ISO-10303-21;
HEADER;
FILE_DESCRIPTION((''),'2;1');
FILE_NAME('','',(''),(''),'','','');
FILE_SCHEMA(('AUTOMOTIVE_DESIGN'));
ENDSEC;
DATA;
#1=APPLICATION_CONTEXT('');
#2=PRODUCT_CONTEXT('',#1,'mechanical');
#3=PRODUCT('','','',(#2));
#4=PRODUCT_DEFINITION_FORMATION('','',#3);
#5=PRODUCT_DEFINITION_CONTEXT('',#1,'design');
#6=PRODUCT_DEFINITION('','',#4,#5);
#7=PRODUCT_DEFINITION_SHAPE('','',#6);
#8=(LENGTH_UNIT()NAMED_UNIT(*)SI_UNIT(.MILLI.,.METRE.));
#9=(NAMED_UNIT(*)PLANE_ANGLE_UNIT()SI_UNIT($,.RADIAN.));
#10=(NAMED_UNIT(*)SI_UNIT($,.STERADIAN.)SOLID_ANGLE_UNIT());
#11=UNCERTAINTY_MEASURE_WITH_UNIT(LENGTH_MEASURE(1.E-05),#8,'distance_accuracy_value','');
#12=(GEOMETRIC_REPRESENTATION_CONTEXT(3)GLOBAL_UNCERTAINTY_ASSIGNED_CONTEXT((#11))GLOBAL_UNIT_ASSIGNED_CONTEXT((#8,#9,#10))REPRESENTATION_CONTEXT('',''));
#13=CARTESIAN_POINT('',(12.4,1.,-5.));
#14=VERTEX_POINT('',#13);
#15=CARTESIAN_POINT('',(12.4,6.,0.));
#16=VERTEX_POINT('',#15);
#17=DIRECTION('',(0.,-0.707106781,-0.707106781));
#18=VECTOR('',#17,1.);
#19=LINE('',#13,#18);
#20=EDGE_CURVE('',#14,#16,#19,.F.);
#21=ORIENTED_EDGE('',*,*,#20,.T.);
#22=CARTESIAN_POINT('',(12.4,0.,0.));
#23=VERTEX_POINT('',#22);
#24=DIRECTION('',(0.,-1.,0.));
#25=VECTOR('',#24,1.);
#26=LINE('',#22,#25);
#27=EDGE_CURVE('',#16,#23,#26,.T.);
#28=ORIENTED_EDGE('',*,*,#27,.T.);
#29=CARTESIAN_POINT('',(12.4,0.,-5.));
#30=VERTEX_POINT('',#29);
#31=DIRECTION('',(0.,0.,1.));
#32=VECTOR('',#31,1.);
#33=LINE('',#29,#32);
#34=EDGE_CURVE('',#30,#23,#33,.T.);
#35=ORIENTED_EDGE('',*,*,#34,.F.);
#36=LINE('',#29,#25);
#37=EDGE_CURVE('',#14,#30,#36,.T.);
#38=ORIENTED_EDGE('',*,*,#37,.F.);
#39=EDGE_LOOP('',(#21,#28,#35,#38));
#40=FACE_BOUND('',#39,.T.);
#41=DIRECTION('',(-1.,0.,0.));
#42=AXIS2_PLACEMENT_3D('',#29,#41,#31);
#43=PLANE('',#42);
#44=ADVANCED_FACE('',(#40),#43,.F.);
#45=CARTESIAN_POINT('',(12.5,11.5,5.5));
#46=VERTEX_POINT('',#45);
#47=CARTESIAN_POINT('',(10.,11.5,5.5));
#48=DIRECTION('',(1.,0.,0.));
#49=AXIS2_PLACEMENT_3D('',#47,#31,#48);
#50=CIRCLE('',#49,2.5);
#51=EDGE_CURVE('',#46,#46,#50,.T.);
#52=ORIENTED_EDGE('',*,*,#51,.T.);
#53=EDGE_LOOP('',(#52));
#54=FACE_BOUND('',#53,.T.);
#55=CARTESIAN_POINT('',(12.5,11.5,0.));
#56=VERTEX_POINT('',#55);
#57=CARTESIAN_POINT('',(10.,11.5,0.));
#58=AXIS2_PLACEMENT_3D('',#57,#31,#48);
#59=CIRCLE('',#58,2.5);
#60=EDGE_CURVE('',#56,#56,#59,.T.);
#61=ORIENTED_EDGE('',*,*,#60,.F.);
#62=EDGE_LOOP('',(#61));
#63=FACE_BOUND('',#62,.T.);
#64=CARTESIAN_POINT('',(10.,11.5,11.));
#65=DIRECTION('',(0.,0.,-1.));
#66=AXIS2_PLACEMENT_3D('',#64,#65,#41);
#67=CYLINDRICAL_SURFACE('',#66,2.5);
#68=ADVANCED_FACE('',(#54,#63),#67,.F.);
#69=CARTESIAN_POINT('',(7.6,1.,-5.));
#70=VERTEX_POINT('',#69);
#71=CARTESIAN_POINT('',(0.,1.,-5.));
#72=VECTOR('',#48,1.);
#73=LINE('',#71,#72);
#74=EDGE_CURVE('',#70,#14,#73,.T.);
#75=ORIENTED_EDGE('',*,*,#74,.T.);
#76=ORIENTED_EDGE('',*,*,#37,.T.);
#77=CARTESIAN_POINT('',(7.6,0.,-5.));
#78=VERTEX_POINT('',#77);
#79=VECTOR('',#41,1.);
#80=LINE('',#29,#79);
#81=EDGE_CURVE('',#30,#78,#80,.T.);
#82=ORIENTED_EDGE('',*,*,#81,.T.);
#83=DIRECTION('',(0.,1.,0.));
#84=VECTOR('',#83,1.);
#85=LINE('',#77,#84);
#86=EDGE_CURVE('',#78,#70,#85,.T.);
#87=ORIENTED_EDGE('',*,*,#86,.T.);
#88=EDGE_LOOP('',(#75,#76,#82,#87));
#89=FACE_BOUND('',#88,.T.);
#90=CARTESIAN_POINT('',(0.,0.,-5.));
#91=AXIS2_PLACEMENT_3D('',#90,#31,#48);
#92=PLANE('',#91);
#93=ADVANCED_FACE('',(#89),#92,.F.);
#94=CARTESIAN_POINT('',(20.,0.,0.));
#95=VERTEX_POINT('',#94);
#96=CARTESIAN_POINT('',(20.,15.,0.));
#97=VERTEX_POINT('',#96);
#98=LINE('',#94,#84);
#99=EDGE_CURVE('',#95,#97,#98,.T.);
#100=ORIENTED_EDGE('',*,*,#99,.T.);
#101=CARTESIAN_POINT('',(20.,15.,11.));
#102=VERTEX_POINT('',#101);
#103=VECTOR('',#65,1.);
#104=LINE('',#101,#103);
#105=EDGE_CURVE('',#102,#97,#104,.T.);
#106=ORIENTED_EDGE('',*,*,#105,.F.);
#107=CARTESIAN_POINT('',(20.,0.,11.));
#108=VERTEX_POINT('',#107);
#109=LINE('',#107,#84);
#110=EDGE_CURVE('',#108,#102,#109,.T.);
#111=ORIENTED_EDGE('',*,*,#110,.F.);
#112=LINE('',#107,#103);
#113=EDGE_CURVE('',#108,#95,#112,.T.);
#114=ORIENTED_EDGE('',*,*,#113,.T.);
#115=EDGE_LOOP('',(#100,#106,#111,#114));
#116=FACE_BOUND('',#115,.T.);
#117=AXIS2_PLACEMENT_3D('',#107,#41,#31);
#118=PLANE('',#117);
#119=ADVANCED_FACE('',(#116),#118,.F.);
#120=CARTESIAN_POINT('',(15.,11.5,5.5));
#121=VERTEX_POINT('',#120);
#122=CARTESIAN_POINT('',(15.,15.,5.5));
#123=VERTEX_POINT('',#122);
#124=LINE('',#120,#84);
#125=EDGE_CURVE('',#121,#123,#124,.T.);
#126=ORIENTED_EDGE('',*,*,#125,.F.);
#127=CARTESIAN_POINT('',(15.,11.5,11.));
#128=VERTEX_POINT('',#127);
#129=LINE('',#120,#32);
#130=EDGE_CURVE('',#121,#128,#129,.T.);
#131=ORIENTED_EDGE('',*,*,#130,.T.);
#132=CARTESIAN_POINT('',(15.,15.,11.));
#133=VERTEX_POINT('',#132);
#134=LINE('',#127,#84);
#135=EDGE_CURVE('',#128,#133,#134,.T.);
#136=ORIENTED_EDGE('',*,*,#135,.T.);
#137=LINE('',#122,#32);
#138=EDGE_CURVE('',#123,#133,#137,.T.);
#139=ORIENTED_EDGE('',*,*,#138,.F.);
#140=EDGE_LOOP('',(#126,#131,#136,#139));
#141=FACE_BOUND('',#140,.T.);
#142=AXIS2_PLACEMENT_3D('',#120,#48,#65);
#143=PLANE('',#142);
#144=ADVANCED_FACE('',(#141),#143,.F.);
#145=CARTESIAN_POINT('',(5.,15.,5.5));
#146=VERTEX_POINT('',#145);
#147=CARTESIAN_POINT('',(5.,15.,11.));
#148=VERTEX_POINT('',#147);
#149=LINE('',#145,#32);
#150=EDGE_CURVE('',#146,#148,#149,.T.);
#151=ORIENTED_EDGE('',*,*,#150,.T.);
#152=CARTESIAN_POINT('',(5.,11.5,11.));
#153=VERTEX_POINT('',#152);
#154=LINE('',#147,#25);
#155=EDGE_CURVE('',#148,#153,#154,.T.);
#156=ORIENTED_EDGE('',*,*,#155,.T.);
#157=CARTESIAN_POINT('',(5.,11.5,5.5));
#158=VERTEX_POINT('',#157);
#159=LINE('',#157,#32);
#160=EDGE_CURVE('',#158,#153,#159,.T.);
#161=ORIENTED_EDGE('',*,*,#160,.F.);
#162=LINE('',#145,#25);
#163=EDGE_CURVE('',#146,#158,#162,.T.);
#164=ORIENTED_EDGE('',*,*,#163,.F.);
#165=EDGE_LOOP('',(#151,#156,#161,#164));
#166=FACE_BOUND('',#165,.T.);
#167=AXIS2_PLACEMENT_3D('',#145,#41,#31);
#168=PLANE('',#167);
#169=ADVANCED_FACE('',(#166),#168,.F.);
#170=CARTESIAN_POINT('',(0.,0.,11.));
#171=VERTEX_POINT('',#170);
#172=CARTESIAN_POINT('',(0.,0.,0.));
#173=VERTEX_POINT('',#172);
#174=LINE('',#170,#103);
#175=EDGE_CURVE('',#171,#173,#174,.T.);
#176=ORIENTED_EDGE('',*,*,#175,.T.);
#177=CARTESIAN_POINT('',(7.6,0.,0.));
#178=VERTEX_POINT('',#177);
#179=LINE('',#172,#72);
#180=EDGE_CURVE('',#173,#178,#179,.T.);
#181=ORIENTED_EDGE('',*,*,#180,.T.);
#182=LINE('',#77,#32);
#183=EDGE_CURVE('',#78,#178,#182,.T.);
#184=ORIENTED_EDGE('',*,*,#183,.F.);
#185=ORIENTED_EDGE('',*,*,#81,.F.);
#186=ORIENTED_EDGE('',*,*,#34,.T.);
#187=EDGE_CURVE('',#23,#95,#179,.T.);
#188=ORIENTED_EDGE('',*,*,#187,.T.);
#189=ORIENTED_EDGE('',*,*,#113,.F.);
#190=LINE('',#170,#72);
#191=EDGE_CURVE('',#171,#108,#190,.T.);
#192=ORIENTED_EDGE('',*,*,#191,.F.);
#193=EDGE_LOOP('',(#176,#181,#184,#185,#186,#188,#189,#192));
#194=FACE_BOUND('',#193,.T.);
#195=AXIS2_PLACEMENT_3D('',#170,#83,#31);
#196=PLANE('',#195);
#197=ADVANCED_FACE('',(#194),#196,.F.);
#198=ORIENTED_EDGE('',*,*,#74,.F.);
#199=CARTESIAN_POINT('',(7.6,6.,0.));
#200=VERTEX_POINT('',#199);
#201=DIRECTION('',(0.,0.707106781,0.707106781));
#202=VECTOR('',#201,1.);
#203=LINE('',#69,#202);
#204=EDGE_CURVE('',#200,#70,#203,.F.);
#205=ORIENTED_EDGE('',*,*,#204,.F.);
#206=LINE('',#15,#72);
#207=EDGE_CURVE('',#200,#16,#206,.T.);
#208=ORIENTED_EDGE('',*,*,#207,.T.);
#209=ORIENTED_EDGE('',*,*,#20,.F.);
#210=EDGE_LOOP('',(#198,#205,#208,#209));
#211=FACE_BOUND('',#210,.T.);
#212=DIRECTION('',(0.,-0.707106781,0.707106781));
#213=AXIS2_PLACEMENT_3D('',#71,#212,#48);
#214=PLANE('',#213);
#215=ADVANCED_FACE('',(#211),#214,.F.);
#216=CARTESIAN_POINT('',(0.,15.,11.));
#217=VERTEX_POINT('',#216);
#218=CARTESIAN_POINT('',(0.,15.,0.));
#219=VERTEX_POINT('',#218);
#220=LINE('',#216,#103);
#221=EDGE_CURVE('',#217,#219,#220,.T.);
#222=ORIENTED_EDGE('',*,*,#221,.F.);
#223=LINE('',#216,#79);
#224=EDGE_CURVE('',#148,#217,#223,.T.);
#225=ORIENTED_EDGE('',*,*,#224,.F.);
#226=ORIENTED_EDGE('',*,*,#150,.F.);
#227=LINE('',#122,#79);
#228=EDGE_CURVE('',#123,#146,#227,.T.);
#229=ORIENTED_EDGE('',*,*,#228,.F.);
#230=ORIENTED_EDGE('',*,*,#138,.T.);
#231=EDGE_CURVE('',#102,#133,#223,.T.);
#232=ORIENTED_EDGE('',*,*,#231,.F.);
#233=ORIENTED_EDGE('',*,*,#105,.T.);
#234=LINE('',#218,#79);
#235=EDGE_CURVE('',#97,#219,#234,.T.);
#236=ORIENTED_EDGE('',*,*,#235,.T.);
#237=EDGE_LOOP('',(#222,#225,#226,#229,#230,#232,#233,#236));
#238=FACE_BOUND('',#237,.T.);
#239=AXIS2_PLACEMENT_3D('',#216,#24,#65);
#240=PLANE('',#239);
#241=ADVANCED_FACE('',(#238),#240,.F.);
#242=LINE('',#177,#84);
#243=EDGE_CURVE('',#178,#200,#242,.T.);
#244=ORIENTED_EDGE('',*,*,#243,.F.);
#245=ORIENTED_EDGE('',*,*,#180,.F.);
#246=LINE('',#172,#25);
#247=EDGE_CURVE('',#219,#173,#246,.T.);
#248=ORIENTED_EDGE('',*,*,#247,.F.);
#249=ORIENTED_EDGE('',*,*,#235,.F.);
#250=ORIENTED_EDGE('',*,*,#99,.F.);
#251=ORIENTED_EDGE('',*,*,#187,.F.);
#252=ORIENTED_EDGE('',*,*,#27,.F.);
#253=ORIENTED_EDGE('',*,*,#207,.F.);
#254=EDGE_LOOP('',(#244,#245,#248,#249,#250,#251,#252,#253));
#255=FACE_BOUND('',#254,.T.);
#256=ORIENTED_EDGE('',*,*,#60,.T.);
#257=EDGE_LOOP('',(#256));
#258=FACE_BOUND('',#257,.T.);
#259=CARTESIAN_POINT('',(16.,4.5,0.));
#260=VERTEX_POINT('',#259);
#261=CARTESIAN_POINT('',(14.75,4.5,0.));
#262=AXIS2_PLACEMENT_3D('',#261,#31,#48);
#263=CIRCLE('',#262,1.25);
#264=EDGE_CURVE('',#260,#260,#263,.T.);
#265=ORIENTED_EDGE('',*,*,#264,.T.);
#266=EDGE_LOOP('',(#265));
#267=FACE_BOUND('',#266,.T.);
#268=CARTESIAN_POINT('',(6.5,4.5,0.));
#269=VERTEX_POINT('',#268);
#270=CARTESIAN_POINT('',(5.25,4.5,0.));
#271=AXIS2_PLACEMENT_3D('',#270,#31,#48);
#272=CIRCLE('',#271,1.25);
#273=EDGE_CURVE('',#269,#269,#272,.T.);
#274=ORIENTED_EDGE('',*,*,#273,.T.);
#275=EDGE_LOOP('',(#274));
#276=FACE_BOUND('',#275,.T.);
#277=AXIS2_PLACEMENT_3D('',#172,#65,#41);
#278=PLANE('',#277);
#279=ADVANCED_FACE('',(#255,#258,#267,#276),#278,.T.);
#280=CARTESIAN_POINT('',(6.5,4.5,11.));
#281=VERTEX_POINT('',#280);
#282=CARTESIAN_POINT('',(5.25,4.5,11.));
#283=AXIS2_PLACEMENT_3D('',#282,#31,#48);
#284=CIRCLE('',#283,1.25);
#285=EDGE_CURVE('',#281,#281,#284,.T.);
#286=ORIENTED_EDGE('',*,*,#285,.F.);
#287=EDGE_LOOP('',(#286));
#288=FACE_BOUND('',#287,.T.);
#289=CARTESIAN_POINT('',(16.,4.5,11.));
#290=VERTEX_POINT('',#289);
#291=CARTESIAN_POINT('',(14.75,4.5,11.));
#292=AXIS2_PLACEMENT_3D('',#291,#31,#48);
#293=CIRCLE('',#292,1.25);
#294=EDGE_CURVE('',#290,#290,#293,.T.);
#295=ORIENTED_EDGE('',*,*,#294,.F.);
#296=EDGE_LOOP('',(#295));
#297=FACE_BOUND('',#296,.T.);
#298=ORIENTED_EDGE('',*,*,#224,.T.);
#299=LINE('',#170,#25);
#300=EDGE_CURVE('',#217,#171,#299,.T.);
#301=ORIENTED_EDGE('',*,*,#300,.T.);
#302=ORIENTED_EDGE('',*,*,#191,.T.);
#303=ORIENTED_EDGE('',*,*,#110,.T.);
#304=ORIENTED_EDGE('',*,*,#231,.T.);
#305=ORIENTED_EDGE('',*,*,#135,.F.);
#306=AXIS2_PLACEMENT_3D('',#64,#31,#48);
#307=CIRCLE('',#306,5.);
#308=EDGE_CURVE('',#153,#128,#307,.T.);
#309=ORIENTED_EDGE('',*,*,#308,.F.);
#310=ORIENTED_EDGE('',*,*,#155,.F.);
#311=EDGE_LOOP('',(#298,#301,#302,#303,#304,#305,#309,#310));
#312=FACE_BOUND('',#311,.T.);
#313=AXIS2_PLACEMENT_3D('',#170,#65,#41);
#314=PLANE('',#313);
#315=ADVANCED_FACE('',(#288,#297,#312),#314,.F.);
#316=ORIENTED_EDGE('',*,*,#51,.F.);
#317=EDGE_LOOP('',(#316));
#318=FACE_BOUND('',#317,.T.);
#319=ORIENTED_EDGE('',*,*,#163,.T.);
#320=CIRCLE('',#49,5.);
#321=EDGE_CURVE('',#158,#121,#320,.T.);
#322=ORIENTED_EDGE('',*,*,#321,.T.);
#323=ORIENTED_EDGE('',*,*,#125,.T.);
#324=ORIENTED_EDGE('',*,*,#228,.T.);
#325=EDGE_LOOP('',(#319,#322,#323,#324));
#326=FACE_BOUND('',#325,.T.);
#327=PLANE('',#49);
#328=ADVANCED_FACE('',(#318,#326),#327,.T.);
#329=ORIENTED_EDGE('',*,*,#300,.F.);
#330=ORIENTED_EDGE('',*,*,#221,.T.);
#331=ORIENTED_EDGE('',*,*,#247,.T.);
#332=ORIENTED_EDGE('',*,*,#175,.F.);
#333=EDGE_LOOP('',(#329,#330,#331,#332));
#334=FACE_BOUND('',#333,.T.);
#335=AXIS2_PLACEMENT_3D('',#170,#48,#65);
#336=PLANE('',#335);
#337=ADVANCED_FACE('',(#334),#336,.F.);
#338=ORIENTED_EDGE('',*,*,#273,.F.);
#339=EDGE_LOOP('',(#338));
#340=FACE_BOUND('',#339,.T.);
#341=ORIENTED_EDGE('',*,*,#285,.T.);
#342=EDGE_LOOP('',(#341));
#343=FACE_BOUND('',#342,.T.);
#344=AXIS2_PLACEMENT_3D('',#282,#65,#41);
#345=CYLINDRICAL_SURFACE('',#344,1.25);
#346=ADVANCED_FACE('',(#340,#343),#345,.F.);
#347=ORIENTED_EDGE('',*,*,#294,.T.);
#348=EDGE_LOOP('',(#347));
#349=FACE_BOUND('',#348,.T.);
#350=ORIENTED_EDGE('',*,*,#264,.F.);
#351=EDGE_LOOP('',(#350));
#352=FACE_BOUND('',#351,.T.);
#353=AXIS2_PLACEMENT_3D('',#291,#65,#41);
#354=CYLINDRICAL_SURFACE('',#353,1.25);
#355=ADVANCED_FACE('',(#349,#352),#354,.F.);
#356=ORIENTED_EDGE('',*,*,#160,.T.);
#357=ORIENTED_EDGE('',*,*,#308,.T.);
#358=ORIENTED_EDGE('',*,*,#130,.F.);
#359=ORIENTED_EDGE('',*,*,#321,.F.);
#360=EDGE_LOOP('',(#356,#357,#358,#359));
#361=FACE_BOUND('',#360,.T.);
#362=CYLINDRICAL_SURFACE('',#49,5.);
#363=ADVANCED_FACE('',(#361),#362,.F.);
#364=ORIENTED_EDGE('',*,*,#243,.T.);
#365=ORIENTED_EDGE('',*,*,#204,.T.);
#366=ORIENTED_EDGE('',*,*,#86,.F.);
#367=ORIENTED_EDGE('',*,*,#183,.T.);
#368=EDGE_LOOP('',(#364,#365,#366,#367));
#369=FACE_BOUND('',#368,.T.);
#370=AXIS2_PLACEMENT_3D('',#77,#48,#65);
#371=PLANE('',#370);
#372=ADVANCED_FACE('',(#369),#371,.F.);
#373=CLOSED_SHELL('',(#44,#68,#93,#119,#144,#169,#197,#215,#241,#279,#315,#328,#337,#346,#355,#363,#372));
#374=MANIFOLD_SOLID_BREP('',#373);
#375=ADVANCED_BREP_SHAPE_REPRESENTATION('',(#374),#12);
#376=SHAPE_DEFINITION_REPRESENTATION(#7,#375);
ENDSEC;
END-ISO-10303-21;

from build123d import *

# Parameters (mm, degrees)
SKETCH1_W           = 20
SKETCH1_H           = 15
SKETCH1_R           = 2.5
SKETCH1_R_2         = 1.25
BOSS_EXTRUDE1_DEPTH = 11
CUT_EXTRUDE1_DEPTH  = 5.5
SKETCH3_W           = 4.8
SKETCH3_H           = 6
BOSS_EXTRUDE2_DEPTH = 5
CHAMFER1_SIZE       = 5


with BuildPart() as part:
    # Sketch1 → Boss-Extrude1 (new body)
    with BuildSketch(Plane.XY):
        with Locations((10, 7.5)):
            Rectangle(SKETCH1_W, SKETCH1_H)
        with Locations((10, 11.5)):
            Circle(SKETCH1_R, mode=Mode.SUBTRACT)
        with Locations((5.25, 4.5)):
            Circle(SKETCH1_R_2, mode=Mode.SUBTRACT)
        with Locations((14.75, 4.5)):
            Circle(SKETCH1_R_2, mode=Mode.SUBTRACT)
    extrude(amount=BOSS_EXTRUDE1_DEPTH)

    # Sketch2 → Cut-Extrude1 (cut)
    with BuildSketch(Plane.XY.offset(11)):
        with BuildLine():
            Line((15, 11.5), (15, 15))
            Line((15, 15), (5, 15))
            Line((5, 15), (5, 11.5))
            ThreePointArc((5, 11.5), (10, 6.5), (15, 11.5))
        make_face()
    extrude(amount=-CUT_EXTRUDE1_DEPTH, mode=Mode.SUBTRACT)

    # Sketch3 → Boss-Extrude2 (add)
    with BuildSketch(Plane(origin=(0, 0, 0), x_dir=(-1, 0, 0), z_dir=(0, 0, -1))):
        with Locations((-10, 3)):
            Rectangle(SKETCH3_W, SKETCH3_H)
    extrude(amount=BOSS_EXTRUDE2_DEPTH)

    # Chamfer1
    chamfer1_edges = [part.edges().sort_by_distance(p)[0] for p in [
        (10, 6, -5),
    ]]
    chamfer(chamfer1_edges, length=CHAMFER1_SIZE - 0.0001)  # a hair under: the kernel refuses the full size


solid = part.part
